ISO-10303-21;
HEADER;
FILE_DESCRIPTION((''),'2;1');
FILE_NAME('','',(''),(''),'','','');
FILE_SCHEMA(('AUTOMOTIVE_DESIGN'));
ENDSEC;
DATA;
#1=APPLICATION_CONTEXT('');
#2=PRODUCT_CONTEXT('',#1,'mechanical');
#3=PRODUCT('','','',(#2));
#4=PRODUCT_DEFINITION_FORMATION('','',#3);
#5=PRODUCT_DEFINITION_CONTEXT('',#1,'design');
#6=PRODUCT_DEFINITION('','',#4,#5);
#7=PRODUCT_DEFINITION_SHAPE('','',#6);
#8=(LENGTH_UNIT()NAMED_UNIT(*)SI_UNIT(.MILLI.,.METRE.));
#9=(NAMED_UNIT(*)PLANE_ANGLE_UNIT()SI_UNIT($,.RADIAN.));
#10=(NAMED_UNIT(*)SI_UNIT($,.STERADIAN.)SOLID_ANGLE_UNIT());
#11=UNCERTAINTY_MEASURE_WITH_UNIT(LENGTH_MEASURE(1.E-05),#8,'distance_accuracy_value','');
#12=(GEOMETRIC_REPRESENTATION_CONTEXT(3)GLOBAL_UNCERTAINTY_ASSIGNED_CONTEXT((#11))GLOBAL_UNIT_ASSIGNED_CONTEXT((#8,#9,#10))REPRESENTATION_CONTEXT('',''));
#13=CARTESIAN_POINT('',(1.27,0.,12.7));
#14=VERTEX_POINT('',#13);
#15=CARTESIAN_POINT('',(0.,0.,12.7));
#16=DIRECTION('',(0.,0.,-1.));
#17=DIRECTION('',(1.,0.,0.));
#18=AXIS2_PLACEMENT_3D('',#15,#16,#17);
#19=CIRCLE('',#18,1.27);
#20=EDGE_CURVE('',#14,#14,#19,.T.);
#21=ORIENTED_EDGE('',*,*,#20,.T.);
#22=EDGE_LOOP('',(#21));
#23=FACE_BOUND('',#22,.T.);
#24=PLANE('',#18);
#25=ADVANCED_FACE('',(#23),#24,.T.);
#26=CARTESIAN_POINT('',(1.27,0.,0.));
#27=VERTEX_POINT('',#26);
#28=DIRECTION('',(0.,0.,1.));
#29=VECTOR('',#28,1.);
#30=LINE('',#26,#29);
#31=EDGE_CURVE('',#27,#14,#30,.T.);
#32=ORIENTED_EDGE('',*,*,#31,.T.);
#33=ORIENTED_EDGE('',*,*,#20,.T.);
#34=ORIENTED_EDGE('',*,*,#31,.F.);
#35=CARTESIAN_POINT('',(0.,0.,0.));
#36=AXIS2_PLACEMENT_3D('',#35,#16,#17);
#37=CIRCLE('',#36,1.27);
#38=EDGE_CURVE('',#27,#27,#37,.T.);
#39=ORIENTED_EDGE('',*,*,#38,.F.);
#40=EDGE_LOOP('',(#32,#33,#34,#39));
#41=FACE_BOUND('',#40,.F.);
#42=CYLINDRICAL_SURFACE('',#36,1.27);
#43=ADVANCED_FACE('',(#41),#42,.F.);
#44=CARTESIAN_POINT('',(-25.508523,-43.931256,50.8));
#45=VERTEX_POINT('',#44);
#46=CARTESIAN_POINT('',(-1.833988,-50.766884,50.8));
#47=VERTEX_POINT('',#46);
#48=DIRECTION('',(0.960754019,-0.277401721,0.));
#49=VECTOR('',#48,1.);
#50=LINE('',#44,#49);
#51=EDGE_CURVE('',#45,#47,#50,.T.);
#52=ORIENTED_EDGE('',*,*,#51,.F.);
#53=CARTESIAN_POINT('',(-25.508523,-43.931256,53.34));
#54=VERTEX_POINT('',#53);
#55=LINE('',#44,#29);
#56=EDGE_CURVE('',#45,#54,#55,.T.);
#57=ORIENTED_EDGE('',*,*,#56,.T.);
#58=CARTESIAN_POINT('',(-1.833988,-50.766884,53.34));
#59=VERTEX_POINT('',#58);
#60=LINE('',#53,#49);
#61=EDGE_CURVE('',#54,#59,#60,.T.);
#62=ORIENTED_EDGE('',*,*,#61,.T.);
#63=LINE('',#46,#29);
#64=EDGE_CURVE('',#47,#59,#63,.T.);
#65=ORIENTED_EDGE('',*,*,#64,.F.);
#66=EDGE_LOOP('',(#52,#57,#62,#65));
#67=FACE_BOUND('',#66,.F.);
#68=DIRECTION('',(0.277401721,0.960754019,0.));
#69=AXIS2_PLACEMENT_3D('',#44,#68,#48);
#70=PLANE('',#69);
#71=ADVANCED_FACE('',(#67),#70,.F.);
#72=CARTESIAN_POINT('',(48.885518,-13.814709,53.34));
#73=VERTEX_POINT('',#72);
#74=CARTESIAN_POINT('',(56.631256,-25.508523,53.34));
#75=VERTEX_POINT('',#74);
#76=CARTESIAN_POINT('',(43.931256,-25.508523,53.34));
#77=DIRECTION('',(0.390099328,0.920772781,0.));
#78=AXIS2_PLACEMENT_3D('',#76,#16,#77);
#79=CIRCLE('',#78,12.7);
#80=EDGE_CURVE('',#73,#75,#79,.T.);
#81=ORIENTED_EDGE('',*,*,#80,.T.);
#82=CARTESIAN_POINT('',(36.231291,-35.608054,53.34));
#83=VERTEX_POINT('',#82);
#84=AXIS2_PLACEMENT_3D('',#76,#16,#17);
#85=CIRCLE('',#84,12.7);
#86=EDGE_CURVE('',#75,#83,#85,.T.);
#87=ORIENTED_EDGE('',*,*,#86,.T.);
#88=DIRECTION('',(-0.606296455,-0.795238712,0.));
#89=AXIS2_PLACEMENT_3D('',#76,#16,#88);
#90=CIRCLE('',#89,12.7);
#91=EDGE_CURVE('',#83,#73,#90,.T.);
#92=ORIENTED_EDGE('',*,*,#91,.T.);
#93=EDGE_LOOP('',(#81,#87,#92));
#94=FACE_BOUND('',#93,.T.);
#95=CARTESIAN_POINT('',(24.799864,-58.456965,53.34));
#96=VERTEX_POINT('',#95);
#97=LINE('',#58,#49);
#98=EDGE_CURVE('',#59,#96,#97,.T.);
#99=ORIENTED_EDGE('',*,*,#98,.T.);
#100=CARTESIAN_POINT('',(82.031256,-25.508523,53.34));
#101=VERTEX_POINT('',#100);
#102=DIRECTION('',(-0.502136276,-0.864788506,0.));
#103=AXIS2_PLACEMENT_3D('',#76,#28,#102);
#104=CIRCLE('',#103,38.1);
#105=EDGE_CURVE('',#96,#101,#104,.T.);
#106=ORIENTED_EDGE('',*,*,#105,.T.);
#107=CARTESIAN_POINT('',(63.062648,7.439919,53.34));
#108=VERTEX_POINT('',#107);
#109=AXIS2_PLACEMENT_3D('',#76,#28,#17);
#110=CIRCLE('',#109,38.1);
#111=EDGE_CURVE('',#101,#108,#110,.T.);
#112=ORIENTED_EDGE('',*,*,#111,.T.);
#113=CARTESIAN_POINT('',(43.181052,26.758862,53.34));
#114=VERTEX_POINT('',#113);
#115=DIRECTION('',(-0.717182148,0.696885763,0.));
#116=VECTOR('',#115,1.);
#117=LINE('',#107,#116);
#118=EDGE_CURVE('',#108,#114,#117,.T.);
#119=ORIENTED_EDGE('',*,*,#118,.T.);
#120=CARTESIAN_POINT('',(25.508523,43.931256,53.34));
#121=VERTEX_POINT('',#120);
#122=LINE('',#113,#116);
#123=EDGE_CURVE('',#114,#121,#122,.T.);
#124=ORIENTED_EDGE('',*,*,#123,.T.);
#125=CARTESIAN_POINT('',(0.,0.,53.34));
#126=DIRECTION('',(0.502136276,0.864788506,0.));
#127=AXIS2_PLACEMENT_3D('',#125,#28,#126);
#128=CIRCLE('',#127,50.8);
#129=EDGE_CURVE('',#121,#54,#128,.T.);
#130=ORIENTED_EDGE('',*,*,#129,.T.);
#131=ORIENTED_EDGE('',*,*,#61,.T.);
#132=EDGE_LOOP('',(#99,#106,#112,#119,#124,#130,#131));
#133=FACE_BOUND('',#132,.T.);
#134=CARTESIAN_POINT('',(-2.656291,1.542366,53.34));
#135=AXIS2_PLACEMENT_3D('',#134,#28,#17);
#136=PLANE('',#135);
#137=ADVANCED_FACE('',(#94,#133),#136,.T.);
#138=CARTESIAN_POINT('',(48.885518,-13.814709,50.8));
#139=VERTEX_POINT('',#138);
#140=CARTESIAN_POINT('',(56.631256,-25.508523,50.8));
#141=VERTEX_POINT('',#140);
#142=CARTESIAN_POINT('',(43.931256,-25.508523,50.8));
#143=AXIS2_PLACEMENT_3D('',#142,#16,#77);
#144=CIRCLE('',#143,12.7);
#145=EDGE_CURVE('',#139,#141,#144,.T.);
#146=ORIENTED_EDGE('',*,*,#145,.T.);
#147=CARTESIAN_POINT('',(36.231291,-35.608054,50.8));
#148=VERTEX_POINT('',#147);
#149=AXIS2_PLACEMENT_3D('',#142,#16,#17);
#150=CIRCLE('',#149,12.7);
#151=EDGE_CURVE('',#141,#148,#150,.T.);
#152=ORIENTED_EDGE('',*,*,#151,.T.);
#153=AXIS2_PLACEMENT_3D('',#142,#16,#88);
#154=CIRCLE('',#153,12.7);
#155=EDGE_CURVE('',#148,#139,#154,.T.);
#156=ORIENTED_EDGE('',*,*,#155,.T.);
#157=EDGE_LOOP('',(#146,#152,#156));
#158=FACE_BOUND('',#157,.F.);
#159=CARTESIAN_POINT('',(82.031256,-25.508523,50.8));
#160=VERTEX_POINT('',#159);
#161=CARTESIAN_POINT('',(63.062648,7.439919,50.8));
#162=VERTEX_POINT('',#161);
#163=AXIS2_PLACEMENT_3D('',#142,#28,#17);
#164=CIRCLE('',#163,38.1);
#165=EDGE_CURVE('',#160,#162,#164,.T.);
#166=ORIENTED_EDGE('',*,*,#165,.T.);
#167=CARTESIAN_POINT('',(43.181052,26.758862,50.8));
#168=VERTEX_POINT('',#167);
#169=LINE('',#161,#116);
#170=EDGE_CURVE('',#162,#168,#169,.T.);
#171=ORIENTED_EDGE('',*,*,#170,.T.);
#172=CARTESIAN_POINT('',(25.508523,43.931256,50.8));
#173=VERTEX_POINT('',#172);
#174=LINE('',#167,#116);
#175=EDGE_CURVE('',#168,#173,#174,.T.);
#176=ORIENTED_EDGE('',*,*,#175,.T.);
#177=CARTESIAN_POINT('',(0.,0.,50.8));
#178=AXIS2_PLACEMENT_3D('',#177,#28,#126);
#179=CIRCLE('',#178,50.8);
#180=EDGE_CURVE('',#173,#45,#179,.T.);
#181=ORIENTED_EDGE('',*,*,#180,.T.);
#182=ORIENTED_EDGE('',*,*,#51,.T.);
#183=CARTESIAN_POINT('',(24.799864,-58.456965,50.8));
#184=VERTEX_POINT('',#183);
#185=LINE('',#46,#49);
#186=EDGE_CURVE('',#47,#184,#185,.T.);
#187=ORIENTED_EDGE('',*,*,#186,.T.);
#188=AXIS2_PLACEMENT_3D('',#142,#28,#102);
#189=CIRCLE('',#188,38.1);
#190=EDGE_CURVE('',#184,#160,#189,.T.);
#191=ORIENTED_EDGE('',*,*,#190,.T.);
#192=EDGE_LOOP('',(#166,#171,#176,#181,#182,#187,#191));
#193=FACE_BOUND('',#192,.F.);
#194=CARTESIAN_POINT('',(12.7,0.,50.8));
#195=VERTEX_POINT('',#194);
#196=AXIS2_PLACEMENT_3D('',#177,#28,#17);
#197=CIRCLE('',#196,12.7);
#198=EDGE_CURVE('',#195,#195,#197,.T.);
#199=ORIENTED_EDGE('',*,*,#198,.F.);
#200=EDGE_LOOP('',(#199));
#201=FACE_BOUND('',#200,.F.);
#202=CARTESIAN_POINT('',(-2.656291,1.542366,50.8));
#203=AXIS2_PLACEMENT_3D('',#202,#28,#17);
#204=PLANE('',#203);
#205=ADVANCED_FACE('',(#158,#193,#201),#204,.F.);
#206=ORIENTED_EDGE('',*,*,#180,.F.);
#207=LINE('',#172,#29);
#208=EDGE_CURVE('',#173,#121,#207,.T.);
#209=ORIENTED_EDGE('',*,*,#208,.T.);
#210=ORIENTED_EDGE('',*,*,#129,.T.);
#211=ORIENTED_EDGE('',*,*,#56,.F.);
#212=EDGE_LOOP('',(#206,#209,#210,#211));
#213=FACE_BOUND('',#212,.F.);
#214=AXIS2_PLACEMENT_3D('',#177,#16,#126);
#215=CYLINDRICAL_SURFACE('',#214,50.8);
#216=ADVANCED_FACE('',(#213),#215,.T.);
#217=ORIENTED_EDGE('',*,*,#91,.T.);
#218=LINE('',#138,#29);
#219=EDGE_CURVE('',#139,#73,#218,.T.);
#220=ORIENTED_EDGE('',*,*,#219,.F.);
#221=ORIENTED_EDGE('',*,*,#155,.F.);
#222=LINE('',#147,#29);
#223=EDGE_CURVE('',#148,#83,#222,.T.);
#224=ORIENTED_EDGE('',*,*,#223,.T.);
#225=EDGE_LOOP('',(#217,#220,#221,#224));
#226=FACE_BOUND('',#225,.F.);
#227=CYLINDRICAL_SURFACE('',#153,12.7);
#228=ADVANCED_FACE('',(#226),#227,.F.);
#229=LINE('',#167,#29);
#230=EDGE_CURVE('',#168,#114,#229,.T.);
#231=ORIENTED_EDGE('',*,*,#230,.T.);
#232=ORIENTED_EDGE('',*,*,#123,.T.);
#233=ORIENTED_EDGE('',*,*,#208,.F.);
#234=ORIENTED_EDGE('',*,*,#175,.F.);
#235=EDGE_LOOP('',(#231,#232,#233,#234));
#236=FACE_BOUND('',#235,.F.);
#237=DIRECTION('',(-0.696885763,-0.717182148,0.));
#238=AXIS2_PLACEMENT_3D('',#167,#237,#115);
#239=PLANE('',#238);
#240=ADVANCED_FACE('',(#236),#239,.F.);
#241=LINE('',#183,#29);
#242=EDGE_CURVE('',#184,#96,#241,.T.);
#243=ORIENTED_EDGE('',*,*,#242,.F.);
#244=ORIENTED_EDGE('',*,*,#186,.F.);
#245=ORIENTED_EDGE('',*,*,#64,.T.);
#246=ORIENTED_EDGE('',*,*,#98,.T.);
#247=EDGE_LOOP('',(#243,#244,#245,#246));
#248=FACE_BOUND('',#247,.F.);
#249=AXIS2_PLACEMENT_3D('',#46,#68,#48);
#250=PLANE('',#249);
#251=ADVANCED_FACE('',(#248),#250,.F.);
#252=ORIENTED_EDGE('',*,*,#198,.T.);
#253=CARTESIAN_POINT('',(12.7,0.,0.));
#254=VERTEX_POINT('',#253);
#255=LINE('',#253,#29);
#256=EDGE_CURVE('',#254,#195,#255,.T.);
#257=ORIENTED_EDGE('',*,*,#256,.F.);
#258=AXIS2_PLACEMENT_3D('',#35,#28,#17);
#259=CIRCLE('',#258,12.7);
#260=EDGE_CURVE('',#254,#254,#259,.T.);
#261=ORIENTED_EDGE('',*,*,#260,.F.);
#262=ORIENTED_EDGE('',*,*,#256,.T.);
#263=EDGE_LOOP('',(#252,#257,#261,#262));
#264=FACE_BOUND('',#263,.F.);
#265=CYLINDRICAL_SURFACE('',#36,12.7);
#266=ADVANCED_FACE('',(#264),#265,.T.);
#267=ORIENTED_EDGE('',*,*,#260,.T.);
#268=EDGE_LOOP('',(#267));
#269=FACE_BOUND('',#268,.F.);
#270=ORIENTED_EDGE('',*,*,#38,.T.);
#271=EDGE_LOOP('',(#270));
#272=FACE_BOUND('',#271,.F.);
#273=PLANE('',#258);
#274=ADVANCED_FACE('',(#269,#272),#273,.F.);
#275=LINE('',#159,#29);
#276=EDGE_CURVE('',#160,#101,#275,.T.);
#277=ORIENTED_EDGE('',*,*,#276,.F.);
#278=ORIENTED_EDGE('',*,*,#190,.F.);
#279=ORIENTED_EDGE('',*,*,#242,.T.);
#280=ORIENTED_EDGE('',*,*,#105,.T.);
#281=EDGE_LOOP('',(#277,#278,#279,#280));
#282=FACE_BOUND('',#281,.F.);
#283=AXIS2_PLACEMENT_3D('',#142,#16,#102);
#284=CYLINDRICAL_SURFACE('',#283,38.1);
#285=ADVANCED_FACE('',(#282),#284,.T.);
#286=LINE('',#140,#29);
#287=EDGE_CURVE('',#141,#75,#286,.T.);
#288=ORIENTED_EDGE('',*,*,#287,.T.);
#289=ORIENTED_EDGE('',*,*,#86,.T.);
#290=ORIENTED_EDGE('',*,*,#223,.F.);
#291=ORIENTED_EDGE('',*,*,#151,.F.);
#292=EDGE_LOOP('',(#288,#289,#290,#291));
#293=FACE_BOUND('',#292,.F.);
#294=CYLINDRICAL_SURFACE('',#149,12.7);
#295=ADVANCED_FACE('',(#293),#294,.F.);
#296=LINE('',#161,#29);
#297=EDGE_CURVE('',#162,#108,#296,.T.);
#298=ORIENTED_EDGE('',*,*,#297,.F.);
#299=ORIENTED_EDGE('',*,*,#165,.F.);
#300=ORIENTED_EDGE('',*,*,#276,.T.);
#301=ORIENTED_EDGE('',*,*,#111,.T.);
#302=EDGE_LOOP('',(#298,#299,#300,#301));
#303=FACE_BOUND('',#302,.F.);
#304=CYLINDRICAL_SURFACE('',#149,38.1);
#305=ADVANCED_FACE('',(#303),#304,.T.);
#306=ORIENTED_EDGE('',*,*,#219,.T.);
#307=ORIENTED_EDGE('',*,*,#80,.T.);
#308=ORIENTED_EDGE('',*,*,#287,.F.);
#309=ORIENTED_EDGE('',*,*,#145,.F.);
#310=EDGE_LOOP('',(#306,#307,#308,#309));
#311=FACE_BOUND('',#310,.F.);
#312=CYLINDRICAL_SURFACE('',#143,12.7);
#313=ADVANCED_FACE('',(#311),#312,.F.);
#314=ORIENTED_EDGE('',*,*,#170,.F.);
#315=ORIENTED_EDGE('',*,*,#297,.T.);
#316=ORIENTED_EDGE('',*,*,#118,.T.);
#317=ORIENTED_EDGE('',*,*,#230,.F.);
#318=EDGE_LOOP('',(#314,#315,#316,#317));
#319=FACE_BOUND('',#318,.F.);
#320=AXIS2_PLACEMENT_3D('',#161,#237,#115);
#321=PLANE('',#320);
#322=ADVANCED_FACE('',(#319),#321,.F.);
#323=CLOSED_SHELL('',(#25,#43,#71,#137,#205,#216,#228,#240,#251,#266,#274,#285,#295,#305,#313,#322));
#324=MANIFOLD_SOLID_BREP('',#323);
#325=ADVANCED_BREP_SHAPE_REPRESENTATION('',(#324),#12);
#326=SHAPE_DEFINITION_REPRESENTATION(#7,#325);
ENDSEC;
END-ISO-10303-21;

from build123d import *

# Parameters (mm, degrees)
F0_R     = 12.7
F1_DEPTH = 50.8
F3_DEPTH = 2.54
F4_R     = 1.27
F5_DEPTH = 12.7


with BuildPart() as f1:
    # F0 (on Top) → F1 (new body)
    with BuildSketch(Plane.XY):
        Circle(F0_R)
    extrude(amount=F1_DEPTH)

    # F2 (on face) → F3 (join)
    with BuildSketch(Plane.XY.offset(50.8)):
        with BuildLine():
            Line((43.181052426, 26.7588622961), (25.5085228248, 43.9312561088))
            ThreePointArc((25.5085228248, 43.9312561088), (-43.9312561088, 25.5085228248), (-25.5085228248, -43.9312561088))
            Line((-25.5085228248, -43.9312561088), (-1.833987853, -50.7668837783))
            ThreePointArc((-1.833987853, -50.7668837783), (6.0769799698, -50.4352090751), (13.8403151675, -48.87827407))
            ThreePointArc((13.8403151675, -48.87827407), (5.917077838, -28.064349578), (10.982813992, -6.3771307669))
            ThreePointArc((10.982813992, -6.3771307669), (27.3066244447, 8.7731285653), (49.3108654889, 12.2097725094))
            ThreePointArc((49.3108654889, 12.2097725094), (46.8146101479, 19.7239011532), (43.181052426, 26.7588622961))
        make_face()
        with BuildLine():
            ThreePointArc((12.7, 0), (12.2631916257, -3.3021403894), (10.982813992, -6.3771307669))
            ThreePointArc((10.982813992, -6.3771307669), (-12.2631916257, 3.3021403894), (12.7, 0))
        make_face(mode=Mode.SUBTRACT)
        with BuildLine():
            ThreePointArc((63.0626482274, 7.4399192569), (56.4166545258, 10.4876551164), (49.3108654889, 12.2097725094))
            ThreePointArc((49.3108654889, 12.2097725094), (50.4263421578, 6.150123298), (50.8, 0))
            ThreePointArc((50.8, 0), (50.3191031963, -6.9733674448), (48.8855175779, -13.8147085071))
            ThreePointArc((48.8855175779, -13.8147085071), (54.5192002119, -18.4952896423), (56.6312561088, -25.5085228248))
            ThreePointArc((56.6312561088, -25.5085228248), (49.5659896786, -36.8900770946), (36.2312911329, -35.6080544659))
            ThreePointArc((36.2312911329, -35.6080544659), (25.9001181747, -43.7015317642), (13.8403151675, -48.87827407))
            ThreePointArc((13.8403151675, -48.87827407), (18.8584152746, -54.1958484669), (24.7998639903, -58.4569649064))
            ThreePointArc((24.7998639903, -58.4569649064), (62.9405164874, -58.5275782301), (82.0312561088, -25.5085228248))
            ThreePointArc((82.0312561088, -25.5085228248), (76.9503115141, -6.4992624462), (63.0626482274, 7.4399192569))
        make_face()
        with BuildLine():
            ThreePointArc((50.8, 0), (50.4263421578, 6.150123298), (49.3108654889, 12.2097725094))
            ThreePointArc((49.3108654889, 12.2097725094), (27.3066244447, 8.7731285653), (10.982813992, -6.3771307669))
            ThreePointArc((10.982813992, -6.3771307669), (5.917077838, -28.064349578), (13.8403151675, -48.87827407))
            ThreePointArc((13.8403151675, -48.87827407), (25.9001181747, -43.7015317642), (36.2312911329, -35.6080544659))
            ThreePointArc((36.2312911329, -35.6080544659), (32.9484420816, -19.1313921186), (48.8855175779, -13.8147085071))
            ThreePointArc((48.8855175779, -13.8147085071), (50.3191031963, -6.9733674448), (50.8, 0))
        make_face()
        with BuildLine():
            ThreePointArc((12.7, 0), (-12.2631916257, 3.3021403894), (10.982813992, -6.3771307669))
            ThreePointArc((10.982813992, -6.3771307669), (12.2631916257, -3.3021403894), (12.7, 0))
        make_face()
        with BuildLine():
            Line((63.0626482274, 7.4399192569), (43.181052426, 26.7588622961))
            ThreePointArc((43.181052426, 26.7588622961), (46.8146101479, 19.7239011532), (49.3108654889, 12.2097725094))
            ThreePointArc((49.3108654889, 12.2097725094), (56.4166545258, 10.4876551164), (63.0626482274, 7.4399192569))
        make_face()
        with BuildLine():
            ThreePointArc((13.8403151675, -48.87827407), (6.0769799698, -50.4352090751), (-1.833987853, -50.7668837783))
            Line((-1.833987853, -50.7668837783), (24.7998639903, -58.4569649064))
            ThreePointArc((24.7998639903, -58.4569649064), (18.8584152746, -54.1958484669), (13.8403151675, -48.87827407))
        make_face()
    extrude(amount=F3_DEPTH)

    # F4 (on face) → F5 (cut)
    with BuildSketch(Plane(origin=(0, 0, 0), x_dir=(1, 0, 0), z_dir=(0, 0, -1))):
        Circle(F4_R)
    extrude(amount=-F5_DEPTH, mode=Mode.SUBTRACT)


solid = f1.part
